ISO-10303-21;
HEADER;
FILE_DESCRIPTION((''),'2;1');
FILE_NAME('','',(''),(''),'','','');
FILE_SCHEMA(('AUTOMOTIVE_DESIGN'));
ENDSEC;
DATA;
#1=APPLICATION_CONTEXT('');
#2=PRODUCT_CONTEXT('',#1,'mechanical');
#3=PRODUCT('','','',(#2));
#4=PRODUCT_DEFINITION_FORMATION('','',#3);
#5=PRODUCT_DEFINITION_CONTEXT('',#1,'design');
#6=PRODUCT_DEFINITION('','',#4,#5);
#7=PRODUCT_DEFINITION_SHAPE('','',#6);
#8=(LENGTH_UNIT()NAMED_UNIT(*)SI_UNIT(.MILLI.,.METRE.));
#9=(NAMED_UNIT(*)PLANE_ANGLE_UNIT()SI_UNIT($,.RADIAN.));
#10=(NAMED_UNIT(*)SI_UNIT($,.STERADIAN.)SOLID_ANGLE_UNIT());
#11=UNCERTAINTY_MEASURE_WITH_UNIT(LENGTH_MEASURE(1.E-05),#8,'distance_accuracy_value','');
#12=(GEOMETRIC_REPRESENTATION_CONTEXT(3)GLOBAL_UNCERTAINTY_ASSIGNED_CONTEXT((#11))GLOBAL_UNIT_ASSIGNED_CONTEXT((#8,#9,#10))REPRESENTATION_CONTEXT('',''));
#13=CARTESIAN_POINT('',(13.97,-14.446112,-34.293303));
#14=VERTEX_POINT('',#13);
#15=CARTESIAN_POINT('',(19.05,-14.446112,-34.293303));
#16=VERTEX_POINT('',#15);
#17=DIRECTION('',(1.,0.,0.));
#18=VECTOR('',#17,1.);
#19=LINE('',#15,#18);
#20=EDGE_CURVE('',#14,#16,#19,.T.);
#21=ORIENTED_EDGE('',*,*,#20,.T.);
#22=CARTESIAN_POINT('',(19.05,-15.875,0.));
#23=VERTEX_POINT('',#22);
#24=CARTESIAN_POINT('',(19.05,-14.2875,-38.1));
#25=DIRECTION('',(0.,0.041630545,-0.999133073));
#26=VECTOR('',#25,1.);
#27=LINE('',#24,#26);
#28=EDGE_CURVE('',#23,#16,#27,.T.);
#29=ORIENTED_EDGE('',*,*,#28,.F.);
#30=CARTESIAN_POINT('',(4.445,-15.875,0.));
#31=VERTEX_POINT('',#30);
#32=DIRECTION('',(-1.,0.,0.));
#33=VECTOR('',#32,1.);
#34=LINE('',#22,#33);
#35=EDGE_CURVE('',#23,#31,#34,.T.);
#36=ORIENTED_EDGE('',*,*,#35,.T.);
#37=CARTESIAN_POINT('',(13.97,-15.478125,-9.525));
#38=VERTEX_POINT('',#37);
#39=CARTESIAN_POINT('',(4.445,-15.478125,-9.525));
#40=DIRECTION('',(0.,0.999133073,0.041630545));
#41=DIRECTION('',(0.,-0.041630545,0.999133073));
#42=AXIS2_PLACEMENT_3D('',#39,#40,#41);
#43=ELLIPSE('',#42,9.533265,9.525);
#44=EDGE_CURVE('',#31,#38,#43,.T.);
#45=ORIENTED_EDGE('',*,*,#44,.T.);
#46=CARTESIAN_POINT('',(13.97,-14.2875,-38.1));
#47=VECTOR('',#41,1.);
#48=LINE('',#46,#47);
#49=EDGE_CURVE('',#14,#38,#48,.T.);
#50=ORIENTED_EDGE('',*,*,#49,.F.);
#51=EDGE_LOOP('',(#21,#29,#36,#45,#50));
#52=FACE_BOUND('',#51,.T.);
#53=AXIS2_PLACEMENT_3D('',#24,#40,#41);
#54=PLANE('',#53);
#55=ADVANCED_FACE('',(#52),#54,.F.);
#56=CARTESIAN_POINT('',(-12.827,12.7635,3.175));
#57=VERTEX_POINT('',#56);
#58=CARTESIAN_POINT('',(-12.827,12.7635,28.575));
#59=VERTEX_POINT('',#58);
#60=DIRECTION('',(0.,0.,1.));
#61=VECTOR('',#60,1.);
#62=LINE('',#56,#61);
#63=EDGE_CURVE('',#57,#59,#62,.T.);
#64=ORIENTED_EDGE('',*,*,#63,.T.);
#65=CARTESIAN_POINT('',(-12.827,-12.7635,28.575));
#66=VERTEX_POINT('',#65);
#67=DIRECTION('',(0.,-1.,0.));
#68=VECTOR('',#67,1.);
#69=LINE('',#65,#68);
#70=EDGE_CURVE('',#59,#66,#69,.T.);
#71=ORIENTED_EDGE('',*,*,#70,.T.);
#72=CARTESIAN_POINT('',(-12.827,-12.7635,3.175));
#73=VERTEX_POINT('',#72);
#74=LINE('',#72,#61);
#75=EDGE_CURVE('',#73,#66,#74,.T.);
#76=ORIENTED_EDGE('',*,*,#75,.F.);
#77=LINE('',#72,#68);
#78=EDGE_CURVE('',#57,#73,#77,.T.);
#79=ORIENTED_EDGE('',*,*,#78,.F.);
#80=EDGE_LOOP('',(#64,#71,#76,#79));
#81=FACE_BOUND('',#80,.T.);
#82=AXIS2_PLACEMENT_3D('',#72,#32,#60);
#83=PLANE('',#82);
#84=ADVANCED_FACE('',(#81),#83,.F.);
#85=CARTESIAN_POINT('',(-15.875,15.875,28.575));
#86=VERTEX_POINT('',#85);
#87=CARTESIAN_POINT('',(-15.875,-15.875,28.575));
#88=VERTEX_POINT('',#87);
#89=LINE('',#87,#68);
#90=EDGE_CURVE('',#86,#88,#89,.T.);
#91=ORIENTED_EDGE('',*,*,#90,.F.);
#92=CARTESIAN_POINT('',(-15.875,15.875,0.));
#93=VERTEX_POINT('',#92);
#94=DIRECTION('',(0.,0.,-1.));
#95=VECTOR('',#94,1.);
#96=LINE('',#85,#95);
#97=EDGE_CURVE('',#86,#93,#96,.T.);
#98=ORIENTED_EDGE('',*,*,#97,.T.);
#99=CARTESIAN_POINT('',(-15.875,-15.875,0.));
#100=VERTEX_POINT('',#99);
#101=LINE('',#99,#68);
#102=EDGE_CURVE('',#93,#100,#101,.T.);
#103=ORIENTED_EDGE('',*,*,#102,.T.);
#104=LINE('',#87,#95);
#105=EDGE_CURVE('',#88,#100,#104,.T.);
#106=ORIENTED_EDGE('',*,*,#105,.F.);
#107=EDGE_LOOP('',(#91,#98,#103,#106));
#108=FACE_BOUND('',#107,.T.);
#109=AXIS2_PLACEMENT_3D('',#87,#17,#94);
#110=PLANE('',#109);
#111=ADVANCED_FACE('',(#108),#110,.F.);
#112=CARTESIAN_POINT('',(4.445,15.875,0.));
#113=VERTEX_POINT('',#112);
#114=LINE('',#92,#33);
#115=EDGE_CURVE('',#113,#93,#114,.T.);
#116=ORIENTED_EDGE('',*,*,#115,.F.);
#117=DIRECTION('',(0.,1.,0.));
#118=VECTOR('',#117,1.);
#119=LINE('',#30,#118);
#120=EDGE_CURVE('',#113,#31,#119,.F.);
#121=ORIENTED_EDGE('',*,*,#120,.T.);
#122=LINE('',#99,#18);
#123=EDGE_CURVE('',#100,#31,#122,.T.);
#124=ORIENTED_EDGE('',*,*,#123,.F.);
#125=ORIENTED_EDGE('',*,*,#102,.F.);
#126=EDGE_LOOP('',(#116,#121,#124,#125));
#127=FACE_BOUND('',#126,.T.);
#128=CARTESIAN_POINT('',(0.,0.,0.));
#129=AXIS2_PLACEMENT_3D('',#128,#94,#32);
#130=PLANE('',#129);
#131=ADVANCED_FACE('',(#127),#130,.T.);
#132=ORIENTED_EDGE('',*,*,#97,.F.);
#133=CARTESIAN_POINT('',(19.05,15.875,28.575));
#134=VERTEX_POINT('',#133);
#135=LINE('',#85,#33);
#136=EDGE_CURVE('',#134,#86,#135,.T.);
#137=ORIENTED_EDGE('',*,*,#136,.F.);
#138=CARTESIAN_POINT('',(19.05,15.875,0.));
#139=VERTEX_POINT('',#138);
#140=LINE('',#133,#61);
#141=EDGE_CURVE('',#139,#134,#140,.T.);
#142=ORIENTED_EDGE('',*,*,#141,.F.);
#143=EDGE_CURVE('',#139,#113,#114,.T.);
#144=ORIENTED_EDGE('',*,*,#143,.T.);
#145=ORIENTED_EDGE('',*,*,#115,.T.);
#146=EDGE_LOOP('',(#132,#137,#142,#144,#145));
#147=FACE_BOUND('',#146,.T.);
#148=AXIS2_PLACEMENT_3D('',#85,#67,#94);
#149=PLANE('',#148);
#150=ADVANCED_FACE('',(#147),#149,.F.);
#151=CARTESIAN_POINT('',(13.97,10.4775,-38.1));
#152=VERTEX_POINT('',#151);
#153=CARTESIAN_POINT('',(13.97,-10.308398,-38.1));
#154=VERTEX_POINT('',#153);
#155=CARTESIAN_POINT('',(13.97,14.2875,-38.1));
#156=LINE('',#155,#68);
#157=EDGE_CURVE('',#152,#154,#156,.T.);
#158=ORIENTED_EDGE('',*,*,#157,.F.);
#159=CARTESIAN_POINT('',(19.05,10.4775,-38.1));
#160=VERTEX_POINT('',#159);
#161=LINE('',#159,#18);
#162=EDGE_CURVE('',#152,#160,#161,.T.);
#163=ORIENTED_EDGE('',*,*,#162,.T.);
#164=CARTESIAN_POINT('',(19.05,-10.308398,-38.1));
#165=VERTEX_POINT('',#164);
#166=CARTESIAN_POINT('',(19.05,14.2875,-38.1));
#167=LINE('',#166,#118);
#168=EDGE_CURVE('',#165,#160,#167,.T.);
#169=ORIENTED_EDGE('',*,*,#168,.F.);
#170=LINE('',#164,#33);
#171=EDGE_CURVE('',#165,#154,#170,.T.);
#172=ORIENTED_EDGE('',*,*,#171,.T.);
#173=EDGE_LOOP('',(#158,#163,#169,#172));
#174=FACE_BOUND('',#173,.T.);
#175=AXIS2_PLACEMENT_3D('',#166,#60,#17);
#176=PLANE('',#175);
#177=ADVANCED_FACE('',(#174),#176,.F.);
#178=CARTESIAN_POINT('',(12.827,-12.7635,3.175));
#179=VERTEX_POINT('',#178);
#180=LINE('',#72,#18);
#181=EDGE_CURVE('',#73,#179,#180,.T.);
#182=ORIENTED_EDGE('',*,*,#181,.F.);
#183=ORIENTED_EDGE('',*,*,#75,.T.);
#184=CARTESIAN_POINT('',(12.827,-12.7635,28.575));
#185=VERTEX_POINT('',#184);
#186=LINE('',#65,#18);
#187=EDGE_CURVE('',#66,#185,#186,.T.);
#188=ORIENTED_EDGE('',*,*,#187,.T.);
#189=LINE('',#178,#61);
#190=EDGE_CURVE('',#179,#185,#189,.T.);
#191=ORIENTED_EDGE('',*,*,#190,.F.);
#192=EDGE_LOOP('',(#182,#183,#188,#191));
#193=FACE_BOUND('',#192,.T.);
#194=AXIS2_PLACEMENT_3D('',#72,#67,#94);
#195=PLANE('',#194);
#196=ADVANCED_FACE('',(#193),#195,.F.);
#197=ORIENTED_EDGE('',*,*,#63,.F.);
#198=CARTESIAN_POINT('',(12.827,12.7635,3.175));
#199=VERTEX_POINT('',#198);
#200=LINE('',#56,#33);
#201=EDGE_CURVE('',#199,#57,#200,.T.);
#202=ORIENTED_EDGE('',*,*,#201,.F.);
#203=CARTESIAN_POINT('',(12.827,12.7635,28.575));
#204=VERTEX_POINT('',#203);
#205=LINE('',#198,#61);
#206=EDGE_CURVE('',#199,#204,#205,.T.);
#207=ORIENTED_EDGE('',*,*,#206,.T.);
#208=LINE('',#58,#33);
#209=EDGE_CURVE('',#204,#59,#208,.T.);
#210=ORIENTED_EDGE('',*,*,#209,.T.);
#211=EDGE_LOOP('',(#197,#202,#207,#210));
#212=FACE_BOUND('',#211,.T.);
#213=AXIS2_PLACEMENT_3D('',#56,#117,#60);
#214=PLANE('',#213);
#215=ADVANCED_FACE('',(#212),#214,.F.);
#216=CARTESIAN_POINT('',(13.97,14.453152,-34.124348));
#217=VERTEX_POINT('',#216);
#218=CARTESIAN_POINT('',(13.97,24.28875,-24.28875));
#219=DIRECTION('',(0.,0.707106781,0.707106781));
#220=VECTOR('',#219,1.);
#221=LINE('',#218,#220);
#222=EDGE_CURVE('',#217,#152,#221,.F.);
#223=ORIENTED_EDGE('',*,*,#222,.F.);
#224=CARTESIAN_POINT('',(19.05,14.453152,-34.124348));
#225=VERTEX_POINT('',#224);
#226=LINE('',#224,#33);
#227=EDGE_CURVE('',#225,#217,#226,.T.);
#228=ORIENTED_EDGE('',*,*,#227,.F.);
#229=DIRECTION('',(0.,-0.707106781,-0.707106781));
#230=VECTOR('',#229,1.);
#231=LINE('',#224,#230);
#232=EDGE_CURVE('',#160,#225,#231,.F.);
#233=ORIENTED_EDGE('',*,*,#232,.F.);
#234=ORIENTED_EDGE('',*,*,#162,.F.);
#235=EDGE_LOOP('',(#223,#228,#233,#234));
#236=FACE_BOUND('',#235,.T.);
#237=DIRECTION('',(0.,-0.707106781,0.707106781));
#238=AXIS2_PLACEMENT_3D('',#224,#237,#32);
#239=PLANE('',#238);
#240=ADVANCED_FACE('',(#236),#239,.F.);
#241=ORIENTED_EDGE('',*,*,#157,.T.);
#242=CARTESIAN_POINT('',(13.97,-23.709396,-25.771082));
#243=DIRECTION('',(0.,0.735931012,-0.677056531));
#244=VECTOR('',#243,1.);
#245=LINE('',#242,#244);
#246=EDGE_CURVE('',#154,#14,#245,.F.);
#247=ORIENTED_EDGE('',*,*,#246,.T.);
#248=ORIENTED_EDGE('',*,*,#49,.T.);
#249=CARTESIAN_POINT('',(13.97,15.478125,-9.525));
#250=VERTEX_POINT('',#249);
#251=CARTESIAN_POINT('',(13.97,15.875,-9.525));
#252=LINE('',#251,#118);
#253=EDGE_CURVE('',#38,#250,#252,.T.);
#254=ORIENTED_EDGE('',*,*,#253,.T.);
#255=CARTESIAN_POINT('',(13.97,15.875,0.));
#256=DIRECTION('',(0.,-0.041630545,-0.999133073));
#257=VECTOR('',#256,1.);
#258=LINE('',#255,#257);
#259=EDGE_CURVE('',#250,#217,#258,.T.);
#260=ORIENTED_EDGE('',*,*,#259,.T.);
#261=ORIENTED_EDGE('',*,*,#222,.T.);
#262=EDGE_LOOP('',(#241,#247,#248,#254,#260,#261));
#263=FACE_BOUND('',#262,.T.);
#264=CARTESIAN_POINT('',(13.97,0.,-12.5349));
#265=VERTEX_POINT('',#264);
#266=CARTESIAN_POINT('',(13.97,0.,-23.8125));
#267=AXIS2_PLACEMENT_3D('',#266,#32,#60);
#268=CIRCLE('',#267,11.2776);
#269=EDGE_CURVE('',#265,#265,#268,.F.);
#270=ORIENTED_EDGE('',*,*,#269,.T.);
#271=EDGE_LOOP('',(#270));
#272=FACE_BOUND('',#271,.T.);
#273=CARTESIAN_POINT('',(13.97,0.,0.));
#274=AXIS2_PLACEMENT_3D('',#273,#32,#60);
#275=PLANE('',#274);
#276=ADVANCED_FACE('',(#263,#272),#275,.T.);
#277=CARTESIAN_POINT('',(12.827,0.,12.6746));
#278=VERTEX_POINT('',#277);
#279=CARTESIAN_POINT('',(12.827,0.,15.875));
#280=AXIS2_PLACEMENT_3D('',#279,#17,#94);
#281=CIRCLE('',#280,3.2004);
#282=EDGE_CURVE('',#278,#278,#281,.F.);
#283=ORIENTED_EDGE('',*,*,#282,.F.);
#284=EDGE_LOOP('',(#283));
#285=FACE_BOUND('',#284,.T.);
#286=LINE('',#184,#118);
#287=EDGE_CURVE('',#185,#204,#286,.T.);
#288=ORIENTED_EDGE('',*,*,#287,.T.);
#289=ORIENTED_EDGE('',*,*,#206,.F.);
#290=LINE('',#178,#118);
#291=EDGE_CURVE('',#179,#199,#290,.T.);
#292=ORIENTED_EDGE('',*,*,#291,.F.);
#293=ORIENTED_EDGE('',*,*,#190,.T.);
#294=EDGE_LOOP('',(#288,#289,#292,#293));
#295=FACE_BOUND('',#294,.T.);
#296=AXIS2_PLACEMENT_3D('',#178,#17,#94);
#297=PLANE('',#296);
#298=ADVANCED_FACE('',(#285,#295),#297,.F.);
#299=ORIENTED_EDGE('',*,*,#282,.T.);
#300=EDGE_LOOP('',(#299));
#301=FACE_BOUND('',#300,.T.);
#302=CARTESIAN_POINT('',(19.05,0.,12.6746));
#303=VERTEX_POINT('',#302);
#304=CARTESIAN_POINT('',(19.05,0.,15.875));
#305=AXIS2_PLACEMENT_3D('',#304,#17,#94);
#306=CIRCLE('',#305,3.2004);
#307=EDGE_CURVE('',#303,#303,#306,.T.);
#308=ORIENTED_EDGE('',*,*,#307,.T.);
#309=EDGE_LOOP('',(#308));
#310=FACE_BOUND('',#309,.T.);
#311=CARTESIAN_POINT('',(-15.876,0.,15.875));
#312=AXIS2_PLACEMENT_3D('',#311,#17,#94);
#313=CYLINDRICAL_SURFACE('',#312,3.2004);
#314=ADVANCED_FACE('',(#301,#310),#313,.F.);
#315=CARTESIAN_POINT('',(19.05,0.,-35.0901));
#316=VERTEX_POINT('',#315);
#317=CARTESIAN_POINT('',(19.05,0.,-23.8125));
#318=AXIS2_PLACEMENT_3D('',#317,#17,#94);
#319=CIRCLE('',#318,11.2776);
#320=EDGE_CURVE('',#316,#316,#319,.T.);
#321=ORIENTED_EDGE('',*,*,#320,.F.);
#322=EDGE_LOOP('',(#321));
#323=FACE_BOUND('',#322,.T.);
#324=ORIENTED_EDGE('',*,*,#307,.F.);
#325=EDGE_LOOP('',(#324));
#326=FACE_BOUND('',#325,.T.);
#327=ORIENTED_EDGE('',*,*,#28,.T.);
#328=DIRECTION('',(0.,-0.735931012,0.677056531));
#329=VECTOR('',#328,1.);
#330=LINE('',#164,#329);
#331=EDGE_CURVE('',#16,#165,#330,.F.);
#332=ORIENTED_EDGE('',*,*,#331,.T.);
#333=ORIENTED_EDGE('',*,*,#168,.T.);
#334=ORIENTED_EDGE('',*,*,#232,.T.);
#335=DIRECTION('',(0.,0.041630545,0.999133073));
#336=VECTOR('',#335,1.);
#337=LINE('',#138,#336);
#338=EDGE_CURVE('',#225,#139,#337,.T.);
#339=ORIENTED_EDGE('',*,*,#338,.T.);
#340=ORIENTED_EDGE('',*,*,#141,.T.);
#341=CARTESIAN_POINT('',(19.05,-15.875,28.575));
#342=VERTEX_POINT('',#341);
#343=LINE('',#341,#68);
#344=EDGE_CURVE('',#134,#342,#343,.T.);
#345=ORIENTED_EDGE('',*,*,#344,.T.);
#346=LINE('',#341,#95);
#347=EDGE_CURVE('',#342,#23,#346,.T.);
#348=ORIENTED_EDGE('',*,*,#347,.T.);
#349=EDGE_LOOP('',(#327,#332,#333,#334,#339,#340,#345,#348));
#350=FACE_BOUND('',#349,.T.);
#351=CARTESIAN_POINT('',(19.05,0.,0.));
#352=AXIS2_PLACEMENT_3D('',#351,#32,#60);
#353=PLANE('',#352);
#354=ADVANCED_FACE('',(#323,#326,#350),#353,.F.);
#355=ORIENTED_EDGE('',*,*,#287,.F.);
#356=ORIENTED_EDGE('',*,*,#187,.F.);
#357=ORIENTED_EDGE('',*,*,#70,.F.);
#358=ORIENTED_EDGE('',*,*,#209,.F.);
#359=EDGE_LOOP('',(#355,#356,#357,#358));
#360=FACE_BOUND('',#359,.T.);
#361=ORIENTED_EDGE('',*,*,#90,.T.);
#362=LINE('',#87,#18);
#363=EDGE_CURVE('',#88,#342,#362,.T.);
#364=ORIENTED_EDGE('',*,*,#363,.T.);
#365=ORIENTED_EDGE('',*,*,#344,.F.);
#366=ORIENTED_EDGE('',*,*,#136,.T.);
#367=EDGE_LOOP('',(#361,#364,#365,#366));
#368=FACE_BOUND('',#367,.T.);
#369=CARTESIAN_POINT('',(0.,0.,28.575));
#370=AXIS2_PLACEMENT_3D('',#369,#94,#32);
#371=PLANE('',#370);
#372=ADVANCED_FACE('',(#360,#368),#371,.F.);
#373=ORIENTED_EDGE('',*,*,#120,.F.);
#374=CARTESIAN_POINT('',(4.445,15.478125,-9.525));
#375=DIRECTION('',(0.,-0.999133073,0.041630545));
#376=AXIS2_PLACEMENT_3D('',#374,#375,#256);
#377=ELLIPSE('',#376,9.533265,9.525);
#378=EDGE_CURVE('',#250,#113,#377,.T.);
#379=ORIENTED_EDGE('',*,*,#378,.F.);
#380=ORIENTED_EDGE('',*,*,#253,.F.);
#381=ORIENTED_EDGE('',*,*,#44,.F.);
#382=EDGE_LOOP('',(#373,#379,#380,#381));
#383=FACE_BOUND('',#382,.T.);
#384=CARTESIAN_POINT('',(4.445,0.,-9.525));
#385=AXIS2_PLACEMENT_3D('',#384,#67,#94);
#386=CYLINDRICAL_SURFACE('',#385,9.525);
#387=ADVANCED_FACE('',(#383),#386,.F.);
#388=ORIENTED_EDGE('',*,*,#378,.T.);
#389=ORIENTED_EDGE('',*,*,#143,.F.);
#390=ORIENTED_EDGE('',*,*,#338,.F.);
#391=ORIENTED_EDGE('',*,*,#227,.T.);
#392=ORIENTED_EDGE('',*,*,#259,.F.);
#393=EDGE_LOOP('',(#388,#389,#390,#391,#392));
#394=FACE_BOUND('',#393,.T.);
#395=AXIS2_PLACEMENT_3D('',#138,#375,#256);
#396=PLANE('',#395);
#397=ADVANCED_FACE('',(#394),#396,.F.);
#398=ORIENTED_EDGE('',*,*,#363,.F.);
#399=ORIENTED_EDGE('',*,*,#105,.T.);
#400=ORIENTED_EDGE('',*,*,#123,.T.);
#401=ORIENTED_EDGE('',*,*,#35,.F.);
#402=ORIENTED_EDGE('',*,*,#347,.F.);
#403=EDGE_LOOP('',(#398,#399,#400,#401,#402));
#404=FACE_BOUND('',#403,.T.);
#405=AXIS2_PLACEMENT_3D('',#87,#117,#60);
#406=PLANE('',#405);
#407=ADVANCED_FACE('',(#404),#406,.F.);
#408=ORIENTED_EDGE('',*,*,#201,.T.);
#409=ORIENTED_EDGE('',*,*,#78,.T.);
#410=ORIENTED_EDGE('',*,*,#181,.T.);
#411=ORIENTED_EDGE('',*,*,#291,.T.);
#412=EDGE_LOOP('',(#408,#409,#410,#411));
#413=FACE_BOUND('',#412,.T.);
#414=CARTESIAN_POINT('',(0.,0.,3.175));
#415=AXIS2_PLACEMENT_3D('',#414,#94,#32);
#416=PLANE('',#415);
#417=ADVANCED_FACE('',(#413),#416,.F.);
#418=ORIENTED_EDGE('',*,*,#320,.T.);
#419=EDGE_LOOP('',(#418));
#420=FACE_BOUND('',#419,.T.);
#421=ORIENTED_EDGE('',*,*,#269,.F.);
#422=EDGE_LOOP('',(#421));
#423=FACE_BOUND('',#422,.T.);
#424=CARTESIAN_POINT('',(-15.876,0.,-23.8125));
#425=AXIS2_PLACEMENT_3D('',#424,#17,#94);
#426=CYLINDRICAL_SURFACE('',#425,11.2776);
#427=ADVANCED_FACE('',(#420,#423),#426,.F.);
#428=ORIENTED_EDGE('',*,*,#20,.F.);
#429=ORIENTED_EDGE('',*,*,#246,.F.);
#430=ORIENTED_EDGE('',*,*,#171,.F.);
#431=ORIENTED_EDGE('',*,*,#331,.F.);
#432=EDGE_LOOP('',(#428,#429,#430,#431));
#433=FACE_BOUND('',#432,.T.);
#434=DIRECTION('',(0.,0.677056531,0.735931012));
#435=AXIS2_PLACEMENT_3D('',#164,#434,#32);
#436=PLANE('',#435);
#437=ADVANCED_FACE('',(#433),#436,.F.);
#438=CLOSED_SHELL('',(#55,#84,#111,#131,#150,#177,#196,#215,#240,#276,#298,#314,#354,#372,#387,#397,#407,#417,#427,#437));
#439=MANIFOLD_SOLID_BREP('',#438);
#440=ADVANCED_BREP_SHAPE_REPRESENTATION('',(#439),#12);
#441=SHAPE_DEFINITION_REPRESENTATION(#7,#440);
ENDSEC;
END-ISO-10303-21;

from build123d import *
from OCP.BRepFilletAPI import BRepFilletAPI_MakeChamfer

# Parameters (mm, degrees)
SKETCH1_W           = 31.75
SKETCH1_H           = 31.75
BOSS_EXTRUDE1_DEPTH = 28.575
SKETCH2_W           = 25.654
SKETCH2_H           = 25.527
CUT_EXTRUDE1_DEPTH  = 25.4
BOSS_EXTRUDE2_DEPTH = 3.175
BOSS_EXTRUDE3_DEPTH = 1.905
FILLET1_R           = 9.525
CUT_EXTRUDE2_REACH  = 56.068
SKETCH6_R           = 11.2776
SKETCH6_R_2         = 3.2004
CHAMFER1_SIZE       = 3.81
CHAMFER1_SIZE2      = 3.979101764


with BuildPart() as part:
    # Sketch1 → Boss-Extrude1 (new body)
    with BuildSketch(Plane.XY):
        Rectangle(SKETCH1_W, SKETCH1_H)
    extrude(amount=BOSS_EXTRUDE1_DEPTH)

    # Sketch2 → Cut-Extrude1 (cut)
    with BuildSketch(Plane.XY.offset(28.575)):
        Rectangle(SKETCH2_W, SKETCH2_H)
    extrude(amount=-CUT_EXTRUDE1_DEPTH, mode=Mode.SUBTRACT)

    # Sketch4 → Boss-Extrude2 (add)
    with BuildSketch(Plane(origin=(15.875, 0, 0), x_dir=(0, 0, -1), z_dir=(1, 0, 0))):
        Polygon((-28.575, -15.875), (0, -15.875), (38.1, -14.2875), (38.1, 14.2875), (0, 15.875), (-28.575, 15.875), align=None)
    extrude(amount=BOSS_EXTRUDE2_DEPTH)

    # Sketch5 → Boss-Extrude3 (add)
    with BuildSketch(Plane.ZY.offset(-15.875)):
        Polygon((-38.1, -14.2875), (0, -15.875), (0, 15.875), (-38.1, 14.2875), align=None)
    extrude(amount=BOSS_EXTRUDE3_DEPTH)

    # Fillet1
    # the kernel refuses this fillet: 9.525 mm, written as the material it adds along each edge
    with BuildSketch(Plane(origin=(13.97, -15.875, 0), x_dir=(-1, 0, 0), z_dir=(0, 1, 0))) as fillet1_piece_1_section:
        with BuildLine():
            CenterArc((FILLET1_R, -FILLET1_R), FILLET1_R, 90, 90)
            Line((0, -FILLET1_R), (0, 0))
            Line((0, 0), (FILLET1_R, 0))
        make_face()
    fillet1_piece_1 = extrude(amount=31.75, mode=Mode.PRIVATE)
    fillet1_piece_1 = split(fillet1_piece_1, bisect_by=Plane(origin=(11.807061563, -15.758253216, -2.801922808), z_dir=(0, 0.999133073092352, 0.04163054471218078)), keep=Keep.TOP, mode=Mode.PRIVATE)
    fillet1_piece_1 = split(fillet1_piece_1, bisect_by=Plane(origin=(11.807061563, 15.758253216, -2.801922808), z_dir=(0, -0.9991330730923519, 0.041630544712181895)), keep=Keep.TOP, mode=Mode.PRIVATE)
    add(fillet1_piece_1)

    # Sketch6 → Cut-Extrude2 (cut, up to next)
    with BuildSketch(Plane(origin=(19.05, 0, 0), x_dir=(0, 0, -1), z_dir=(1, 0, 0)), mode=Mode.PRIVATE) as cut_extrude2_sk1:
        with Locations((23.8125, 0)):
            Circle(SKETCH6_R)
    cut_extrude2_tool1 = extrude(cut_extrude2_sk1.sketch, amount=-CUT_EXTRUDE2_REACH, mode=Mode.PRIVATE) & part.part
    # Sketch6 → Cut-Extrude2 (cut, up to next)
    with BuildSketch(Plane(origin=(19.05, 0, 0), x_dir=(0, 0, -1), z_dir=(1, 0, 0)), mode=Mode.PRIVATE) as cut_extrude2_sk2:
        with Locations((-15.875, 0)):
            Circle(SKETCH6_R_2)
    cut_extrude2_tool2 = extrude(cut_extrude2_sk2.sketch, amount=-CUT_EXTRUDE2_REACH, mode=Mode.PRIVATE) & part.part
    add(cut_extrude2_tool1.solids().sort_by_distance((19.05, 0, -23.8125))[0], mode=Mode.SUBTRACT)
    add(cut_extrude2_tool2.solids().sort_by_distance((19.05, 0, 15.875))[0], mode=Mode.SUBTRACT)

    # Chamfer1: one chamfer whose edges measure the first distance from different faces: ONE call of the kernel's chamfer builder (chamfer() names one face for all edges)
    chamfer1_edges_1 = [part.edges().sort_by_distance(p)[0] for p in [
        (16.51, -14.2875, -38.1),
    ]]
    chamfer1_side_1 = [part.faces().sort_by_distance(p)[0] for p in [
        (16.083382106, -15.145696386, -17.503286726),
    ]]
    chamfer1_edges_2 = [part.edges().sort_by_distance(p)[0] for p in [
        (16.51, 14.2875, -38.1),
    ]]
    chamfer1_side_2 = [part.faces().sort_by_distance(p)[0] for p in [
        (16.51, 0, -38.1),
    ]]
    chamfer1 = BRepFilletAPI_MakeChamfer(part.part.solid().wrapped)
    for e in chamfer1_edges_1:
        chamfer1.Add(CHAMFER1_SIZE, CHAMFER1_SIZE2, e.wrapped, chamfer1_side_1[0].wrapped)  # the first distance lies on this face
    for e in chamfer1_edges_2:
        chamfer1.Add(CHAMFER1_SIZE, CHAMFER1_SIZE2, e.wrapped, chamfer1_side_2[0].wrapped)  # the first distance lies on this face
    add(Compound.cast(chamfer1.Shape()), mode=Mode.REPLACE)


solid = part.part
